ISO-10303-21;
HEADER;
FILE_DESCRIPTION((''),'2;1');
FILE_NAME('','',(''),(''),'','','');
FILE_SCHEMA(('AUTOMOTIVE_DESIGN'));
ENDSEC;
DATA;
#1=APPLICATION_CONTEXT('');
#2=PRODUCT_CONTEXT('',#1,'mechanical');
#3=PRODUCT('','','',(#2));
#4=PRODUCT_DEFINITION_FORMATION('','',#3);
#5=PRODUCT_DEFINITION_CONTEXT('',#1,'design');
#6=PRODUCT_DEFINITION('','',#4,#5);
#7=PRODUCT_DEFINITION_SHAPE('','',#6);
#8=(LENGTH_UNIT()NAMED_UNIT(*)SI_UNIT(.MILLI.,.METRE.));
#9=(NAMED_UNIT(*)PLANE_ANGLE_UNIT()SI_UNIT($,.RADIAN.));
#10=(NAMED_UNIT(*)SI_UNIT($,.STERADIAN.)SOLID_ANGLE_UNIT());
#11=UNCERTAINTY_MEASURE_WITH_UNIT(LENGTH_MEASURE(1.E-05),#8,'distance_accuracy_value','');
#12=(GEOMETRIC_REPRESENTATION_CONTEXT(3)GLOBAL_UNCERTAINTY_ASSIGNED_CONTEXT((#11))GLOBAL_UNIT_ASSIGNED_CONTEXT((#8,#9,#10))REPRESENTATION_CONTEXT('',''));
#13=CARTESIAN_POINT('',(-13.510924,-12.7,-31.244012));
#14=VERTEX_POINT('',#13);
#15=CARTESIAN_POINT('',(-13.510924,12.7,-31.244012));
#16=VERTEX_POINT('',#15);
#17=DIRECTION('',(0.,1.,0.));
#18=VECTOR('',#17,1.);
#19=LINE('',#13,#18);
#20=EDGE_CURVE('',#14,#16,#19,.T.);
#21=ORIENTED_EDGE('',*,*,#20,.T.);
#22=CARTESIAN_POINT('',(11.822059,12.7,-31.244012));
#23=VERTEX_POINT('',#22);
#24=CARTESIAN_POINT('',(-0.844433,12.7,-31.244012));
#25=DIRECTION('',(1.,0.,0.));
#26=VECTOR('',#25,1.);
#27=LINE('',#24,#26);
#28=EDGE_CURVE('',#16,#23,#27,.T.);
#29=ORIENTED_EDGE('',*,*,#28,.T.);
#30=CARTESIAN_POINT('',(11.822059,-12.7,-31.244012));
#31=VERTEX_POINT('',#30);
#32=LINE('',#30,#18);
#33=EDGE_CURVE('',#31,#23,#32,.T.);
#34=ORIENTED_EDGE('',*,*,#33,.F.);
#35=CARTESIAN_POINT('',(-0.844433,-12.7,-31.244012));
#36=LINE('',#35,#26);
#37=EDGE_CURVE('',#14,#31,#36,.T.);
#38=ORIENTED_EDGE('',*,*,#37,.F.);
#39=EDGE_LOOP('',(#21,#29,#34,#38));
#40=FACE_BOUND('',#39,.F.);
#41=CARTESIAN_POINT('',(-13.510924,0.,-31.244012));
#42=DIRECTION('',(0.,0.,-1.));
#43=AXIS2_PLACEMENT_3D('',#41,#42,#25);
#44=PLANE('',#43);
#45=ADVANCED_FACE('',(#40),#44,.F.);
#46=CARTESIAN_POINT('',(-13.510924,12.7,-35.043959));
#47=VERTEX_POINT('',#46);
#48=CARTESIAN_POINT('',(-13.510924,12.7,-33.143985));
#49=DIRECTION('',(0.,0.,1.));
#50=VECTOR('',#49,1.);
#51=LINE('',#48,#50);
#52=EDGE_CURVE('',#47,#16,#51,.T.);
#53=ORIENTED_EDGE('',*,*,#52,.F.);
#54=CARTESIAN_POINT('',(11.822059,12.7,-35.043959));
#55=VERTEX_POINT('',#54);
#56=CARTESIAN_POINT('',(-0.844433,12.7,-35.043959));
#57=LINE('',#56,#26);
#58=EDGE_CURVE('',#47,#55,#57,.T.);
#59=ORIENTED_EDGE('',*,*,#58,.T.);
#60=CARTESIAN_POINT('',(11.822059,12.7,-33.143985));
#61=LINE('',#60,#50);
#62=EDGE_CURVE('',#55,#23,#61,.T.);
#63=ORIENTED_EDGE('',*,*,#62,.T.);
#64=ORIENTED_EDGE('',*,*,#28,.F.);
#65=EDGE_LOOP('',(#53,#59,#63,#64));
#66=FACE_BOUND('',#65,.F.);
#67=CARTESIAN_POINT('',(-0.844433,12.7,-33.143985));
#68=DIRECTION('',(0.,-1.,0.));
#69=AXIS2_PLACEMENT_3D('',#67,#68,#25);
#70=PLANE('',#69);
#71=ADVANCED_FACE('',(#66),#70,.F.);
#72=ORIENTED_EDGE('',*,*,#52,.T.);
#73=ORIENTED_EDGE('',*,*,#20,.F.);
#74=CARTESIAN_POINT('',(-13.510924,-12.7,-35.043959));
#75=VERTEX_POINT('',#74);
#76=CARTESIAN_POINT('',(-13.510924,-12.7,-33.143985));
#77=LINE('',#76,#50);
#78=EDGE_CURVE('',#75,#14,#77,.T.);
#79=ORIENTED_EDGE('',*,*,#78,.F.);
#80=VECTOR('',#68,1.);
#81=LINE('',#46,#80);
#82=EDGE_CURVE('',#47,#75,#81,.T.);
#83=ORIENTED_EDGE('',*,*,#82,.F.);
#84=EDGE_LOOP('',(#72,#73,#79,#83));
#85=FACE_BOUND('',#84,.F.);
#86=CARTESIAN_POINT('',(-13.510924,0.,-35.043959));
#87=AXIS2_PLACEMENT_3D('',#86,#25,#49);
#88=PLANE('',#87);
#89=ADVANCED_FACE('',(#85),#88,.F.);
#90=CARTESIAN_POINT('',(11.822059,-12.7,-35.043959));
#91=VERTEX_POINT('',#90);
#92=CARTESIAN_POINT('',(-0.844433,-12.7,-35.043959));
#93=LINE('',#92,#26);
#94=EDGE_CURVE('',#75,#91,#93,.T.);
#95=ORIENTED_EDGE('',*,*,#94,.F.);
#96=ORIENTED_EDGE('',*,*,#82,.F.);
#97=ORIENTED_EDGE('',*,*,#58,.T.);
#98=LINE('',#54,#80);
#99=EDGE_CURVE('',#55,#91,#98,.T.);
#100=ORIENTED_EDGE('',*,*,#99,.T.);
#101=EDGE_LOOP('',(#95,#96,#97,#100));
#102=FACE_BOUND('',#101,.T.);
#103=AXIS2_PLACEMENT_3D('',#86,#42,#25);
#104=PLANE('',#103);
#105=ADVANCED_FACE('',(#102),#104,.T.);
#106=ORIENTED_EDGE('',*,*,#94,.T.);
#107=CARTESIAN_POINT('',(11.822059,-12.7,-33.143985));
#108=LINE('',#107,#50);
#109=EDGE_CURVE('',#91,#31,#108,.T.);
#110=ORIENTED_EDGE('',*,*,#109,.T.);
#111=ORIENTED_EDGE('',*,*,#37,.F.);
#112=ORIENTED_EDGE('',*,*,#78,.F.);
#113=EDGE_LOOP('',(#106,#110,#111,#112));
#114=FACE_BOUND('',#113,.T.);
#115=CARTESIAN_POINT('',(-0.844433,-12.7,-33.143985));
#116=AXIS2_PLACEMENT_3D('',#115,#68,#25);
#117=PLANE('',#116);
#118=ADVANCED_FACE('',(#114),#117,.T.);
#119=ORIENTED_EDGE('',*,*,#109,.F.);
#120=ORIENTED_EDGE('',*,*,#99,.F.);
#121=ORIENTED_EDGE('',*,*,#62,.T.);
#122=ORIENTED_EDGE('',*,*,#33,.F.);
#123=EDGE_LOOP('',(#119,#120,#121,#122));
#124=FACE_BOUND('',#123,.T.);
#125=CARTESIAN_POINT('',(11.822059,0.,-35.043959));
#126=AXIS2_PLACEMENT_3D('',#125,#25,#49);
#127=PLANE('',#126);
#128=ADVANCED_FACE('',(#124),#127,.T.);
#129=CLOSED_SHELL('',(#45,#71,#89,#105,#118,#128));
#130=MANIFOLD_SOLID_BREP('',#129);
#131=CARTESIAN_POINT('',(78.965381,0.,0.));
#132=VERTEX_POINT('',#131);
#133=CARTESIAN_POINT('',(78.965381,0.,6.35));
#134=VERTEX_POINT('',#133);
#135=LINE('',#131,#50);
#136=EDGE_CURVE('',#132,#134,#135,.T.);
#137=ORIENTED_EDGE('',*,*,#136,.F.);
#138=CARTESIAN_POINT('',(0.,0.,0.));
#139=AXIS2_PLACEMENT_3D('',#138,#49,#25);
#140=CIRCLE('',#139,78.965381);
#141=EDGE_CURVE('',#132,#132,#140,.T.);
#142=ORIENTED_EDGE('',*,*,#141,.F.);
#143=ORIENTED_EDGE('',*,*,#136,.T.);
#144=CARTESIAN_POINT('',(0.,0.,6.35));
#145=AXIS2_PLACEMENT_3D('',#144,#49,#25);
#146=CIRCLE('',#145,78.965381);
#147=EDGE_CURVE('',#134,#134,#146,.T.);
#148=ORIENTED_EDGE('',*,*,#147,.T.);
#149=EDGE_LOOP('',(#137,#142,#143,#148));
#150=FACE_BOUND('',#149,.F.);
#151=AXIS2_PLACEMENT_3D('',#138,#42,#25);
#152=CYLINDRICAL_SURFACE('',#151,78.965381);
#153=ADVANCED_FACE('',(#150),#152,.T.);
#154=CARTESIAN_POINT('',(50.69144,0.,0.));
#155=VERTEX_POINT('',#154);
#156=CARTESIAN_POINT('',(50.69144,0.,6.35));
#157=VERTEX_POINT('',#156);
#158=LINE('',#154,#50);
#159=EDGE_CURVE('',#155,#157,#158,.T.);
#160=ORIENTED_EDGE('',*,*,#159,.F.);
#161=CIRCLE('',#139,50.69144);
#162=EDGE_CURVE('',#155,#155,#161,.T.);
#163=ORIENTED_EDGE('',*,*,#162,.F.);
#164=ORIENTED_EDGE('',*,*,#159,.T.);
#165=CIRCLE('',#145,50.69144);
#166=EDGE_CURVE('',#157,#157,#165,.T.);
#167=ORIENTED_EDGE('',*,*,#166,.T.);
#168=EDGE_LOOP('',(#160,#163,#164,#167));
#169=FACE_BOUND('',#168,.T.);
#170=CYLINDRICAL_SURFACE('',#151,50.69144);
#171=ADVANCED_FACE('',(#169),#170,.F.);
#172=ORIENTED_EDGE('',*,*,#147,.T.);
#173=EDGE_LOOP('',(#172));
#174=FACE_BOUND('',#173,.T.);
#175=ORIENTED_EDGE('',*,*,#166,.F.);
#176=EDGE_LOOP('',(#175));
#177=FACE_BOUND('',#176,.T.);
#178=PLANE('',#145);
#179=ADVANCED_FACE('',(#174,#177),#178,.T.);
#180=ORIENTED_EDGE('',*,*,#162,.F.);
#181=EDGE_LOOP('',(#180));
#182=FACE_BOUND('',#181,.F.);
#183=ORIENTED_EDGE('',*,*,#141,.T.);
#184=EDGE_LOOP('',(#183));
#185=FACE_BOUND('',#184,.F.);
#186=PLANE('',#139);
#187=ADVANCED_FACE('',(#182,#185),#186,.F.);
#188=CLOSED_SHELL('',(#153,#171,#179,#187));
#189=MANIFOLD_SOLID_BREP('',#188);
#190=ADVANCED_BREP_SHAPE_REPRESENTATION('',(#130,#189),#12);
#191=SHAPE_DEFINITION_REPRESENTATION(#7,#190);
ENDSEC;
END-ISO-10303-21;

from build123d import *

# Parameters (mm, degrees)
F1_W     = 25.3329826519
F1_H     = 3.7999469787
F2_DEPTH = 12.7
F0_R     = 78.9653812796
F0_R_2   = 50.6914401609
F5_DEPTH = 6.35


# Not quite as in the source:
# - the program builds the solid bodies; features that only make, move or delete a surface that nothing else refers to are left out


with BuildPart() as f2:
    # F1 (on Front) → F2 (new body, symmetric)
    with BuildSketch(Plane.XZ):
        with Locations((-0.8444325067, -33.1439850852)):
            Rectangle(F1_W, F1_H)
    extrude(amount=F2_DEPTH, both=True)


with BuildPart() as f5:
    # F0 (on Top) → F5 (new body)
    with BuildSketch(Plane.XY):
        Circle(F0_R)
        Circle(F0_R_2, mode=Mode.SUBTRACT)
    extrude(amount=F5_DEPTH)


solid = Compound([f2.part, f5.part])
